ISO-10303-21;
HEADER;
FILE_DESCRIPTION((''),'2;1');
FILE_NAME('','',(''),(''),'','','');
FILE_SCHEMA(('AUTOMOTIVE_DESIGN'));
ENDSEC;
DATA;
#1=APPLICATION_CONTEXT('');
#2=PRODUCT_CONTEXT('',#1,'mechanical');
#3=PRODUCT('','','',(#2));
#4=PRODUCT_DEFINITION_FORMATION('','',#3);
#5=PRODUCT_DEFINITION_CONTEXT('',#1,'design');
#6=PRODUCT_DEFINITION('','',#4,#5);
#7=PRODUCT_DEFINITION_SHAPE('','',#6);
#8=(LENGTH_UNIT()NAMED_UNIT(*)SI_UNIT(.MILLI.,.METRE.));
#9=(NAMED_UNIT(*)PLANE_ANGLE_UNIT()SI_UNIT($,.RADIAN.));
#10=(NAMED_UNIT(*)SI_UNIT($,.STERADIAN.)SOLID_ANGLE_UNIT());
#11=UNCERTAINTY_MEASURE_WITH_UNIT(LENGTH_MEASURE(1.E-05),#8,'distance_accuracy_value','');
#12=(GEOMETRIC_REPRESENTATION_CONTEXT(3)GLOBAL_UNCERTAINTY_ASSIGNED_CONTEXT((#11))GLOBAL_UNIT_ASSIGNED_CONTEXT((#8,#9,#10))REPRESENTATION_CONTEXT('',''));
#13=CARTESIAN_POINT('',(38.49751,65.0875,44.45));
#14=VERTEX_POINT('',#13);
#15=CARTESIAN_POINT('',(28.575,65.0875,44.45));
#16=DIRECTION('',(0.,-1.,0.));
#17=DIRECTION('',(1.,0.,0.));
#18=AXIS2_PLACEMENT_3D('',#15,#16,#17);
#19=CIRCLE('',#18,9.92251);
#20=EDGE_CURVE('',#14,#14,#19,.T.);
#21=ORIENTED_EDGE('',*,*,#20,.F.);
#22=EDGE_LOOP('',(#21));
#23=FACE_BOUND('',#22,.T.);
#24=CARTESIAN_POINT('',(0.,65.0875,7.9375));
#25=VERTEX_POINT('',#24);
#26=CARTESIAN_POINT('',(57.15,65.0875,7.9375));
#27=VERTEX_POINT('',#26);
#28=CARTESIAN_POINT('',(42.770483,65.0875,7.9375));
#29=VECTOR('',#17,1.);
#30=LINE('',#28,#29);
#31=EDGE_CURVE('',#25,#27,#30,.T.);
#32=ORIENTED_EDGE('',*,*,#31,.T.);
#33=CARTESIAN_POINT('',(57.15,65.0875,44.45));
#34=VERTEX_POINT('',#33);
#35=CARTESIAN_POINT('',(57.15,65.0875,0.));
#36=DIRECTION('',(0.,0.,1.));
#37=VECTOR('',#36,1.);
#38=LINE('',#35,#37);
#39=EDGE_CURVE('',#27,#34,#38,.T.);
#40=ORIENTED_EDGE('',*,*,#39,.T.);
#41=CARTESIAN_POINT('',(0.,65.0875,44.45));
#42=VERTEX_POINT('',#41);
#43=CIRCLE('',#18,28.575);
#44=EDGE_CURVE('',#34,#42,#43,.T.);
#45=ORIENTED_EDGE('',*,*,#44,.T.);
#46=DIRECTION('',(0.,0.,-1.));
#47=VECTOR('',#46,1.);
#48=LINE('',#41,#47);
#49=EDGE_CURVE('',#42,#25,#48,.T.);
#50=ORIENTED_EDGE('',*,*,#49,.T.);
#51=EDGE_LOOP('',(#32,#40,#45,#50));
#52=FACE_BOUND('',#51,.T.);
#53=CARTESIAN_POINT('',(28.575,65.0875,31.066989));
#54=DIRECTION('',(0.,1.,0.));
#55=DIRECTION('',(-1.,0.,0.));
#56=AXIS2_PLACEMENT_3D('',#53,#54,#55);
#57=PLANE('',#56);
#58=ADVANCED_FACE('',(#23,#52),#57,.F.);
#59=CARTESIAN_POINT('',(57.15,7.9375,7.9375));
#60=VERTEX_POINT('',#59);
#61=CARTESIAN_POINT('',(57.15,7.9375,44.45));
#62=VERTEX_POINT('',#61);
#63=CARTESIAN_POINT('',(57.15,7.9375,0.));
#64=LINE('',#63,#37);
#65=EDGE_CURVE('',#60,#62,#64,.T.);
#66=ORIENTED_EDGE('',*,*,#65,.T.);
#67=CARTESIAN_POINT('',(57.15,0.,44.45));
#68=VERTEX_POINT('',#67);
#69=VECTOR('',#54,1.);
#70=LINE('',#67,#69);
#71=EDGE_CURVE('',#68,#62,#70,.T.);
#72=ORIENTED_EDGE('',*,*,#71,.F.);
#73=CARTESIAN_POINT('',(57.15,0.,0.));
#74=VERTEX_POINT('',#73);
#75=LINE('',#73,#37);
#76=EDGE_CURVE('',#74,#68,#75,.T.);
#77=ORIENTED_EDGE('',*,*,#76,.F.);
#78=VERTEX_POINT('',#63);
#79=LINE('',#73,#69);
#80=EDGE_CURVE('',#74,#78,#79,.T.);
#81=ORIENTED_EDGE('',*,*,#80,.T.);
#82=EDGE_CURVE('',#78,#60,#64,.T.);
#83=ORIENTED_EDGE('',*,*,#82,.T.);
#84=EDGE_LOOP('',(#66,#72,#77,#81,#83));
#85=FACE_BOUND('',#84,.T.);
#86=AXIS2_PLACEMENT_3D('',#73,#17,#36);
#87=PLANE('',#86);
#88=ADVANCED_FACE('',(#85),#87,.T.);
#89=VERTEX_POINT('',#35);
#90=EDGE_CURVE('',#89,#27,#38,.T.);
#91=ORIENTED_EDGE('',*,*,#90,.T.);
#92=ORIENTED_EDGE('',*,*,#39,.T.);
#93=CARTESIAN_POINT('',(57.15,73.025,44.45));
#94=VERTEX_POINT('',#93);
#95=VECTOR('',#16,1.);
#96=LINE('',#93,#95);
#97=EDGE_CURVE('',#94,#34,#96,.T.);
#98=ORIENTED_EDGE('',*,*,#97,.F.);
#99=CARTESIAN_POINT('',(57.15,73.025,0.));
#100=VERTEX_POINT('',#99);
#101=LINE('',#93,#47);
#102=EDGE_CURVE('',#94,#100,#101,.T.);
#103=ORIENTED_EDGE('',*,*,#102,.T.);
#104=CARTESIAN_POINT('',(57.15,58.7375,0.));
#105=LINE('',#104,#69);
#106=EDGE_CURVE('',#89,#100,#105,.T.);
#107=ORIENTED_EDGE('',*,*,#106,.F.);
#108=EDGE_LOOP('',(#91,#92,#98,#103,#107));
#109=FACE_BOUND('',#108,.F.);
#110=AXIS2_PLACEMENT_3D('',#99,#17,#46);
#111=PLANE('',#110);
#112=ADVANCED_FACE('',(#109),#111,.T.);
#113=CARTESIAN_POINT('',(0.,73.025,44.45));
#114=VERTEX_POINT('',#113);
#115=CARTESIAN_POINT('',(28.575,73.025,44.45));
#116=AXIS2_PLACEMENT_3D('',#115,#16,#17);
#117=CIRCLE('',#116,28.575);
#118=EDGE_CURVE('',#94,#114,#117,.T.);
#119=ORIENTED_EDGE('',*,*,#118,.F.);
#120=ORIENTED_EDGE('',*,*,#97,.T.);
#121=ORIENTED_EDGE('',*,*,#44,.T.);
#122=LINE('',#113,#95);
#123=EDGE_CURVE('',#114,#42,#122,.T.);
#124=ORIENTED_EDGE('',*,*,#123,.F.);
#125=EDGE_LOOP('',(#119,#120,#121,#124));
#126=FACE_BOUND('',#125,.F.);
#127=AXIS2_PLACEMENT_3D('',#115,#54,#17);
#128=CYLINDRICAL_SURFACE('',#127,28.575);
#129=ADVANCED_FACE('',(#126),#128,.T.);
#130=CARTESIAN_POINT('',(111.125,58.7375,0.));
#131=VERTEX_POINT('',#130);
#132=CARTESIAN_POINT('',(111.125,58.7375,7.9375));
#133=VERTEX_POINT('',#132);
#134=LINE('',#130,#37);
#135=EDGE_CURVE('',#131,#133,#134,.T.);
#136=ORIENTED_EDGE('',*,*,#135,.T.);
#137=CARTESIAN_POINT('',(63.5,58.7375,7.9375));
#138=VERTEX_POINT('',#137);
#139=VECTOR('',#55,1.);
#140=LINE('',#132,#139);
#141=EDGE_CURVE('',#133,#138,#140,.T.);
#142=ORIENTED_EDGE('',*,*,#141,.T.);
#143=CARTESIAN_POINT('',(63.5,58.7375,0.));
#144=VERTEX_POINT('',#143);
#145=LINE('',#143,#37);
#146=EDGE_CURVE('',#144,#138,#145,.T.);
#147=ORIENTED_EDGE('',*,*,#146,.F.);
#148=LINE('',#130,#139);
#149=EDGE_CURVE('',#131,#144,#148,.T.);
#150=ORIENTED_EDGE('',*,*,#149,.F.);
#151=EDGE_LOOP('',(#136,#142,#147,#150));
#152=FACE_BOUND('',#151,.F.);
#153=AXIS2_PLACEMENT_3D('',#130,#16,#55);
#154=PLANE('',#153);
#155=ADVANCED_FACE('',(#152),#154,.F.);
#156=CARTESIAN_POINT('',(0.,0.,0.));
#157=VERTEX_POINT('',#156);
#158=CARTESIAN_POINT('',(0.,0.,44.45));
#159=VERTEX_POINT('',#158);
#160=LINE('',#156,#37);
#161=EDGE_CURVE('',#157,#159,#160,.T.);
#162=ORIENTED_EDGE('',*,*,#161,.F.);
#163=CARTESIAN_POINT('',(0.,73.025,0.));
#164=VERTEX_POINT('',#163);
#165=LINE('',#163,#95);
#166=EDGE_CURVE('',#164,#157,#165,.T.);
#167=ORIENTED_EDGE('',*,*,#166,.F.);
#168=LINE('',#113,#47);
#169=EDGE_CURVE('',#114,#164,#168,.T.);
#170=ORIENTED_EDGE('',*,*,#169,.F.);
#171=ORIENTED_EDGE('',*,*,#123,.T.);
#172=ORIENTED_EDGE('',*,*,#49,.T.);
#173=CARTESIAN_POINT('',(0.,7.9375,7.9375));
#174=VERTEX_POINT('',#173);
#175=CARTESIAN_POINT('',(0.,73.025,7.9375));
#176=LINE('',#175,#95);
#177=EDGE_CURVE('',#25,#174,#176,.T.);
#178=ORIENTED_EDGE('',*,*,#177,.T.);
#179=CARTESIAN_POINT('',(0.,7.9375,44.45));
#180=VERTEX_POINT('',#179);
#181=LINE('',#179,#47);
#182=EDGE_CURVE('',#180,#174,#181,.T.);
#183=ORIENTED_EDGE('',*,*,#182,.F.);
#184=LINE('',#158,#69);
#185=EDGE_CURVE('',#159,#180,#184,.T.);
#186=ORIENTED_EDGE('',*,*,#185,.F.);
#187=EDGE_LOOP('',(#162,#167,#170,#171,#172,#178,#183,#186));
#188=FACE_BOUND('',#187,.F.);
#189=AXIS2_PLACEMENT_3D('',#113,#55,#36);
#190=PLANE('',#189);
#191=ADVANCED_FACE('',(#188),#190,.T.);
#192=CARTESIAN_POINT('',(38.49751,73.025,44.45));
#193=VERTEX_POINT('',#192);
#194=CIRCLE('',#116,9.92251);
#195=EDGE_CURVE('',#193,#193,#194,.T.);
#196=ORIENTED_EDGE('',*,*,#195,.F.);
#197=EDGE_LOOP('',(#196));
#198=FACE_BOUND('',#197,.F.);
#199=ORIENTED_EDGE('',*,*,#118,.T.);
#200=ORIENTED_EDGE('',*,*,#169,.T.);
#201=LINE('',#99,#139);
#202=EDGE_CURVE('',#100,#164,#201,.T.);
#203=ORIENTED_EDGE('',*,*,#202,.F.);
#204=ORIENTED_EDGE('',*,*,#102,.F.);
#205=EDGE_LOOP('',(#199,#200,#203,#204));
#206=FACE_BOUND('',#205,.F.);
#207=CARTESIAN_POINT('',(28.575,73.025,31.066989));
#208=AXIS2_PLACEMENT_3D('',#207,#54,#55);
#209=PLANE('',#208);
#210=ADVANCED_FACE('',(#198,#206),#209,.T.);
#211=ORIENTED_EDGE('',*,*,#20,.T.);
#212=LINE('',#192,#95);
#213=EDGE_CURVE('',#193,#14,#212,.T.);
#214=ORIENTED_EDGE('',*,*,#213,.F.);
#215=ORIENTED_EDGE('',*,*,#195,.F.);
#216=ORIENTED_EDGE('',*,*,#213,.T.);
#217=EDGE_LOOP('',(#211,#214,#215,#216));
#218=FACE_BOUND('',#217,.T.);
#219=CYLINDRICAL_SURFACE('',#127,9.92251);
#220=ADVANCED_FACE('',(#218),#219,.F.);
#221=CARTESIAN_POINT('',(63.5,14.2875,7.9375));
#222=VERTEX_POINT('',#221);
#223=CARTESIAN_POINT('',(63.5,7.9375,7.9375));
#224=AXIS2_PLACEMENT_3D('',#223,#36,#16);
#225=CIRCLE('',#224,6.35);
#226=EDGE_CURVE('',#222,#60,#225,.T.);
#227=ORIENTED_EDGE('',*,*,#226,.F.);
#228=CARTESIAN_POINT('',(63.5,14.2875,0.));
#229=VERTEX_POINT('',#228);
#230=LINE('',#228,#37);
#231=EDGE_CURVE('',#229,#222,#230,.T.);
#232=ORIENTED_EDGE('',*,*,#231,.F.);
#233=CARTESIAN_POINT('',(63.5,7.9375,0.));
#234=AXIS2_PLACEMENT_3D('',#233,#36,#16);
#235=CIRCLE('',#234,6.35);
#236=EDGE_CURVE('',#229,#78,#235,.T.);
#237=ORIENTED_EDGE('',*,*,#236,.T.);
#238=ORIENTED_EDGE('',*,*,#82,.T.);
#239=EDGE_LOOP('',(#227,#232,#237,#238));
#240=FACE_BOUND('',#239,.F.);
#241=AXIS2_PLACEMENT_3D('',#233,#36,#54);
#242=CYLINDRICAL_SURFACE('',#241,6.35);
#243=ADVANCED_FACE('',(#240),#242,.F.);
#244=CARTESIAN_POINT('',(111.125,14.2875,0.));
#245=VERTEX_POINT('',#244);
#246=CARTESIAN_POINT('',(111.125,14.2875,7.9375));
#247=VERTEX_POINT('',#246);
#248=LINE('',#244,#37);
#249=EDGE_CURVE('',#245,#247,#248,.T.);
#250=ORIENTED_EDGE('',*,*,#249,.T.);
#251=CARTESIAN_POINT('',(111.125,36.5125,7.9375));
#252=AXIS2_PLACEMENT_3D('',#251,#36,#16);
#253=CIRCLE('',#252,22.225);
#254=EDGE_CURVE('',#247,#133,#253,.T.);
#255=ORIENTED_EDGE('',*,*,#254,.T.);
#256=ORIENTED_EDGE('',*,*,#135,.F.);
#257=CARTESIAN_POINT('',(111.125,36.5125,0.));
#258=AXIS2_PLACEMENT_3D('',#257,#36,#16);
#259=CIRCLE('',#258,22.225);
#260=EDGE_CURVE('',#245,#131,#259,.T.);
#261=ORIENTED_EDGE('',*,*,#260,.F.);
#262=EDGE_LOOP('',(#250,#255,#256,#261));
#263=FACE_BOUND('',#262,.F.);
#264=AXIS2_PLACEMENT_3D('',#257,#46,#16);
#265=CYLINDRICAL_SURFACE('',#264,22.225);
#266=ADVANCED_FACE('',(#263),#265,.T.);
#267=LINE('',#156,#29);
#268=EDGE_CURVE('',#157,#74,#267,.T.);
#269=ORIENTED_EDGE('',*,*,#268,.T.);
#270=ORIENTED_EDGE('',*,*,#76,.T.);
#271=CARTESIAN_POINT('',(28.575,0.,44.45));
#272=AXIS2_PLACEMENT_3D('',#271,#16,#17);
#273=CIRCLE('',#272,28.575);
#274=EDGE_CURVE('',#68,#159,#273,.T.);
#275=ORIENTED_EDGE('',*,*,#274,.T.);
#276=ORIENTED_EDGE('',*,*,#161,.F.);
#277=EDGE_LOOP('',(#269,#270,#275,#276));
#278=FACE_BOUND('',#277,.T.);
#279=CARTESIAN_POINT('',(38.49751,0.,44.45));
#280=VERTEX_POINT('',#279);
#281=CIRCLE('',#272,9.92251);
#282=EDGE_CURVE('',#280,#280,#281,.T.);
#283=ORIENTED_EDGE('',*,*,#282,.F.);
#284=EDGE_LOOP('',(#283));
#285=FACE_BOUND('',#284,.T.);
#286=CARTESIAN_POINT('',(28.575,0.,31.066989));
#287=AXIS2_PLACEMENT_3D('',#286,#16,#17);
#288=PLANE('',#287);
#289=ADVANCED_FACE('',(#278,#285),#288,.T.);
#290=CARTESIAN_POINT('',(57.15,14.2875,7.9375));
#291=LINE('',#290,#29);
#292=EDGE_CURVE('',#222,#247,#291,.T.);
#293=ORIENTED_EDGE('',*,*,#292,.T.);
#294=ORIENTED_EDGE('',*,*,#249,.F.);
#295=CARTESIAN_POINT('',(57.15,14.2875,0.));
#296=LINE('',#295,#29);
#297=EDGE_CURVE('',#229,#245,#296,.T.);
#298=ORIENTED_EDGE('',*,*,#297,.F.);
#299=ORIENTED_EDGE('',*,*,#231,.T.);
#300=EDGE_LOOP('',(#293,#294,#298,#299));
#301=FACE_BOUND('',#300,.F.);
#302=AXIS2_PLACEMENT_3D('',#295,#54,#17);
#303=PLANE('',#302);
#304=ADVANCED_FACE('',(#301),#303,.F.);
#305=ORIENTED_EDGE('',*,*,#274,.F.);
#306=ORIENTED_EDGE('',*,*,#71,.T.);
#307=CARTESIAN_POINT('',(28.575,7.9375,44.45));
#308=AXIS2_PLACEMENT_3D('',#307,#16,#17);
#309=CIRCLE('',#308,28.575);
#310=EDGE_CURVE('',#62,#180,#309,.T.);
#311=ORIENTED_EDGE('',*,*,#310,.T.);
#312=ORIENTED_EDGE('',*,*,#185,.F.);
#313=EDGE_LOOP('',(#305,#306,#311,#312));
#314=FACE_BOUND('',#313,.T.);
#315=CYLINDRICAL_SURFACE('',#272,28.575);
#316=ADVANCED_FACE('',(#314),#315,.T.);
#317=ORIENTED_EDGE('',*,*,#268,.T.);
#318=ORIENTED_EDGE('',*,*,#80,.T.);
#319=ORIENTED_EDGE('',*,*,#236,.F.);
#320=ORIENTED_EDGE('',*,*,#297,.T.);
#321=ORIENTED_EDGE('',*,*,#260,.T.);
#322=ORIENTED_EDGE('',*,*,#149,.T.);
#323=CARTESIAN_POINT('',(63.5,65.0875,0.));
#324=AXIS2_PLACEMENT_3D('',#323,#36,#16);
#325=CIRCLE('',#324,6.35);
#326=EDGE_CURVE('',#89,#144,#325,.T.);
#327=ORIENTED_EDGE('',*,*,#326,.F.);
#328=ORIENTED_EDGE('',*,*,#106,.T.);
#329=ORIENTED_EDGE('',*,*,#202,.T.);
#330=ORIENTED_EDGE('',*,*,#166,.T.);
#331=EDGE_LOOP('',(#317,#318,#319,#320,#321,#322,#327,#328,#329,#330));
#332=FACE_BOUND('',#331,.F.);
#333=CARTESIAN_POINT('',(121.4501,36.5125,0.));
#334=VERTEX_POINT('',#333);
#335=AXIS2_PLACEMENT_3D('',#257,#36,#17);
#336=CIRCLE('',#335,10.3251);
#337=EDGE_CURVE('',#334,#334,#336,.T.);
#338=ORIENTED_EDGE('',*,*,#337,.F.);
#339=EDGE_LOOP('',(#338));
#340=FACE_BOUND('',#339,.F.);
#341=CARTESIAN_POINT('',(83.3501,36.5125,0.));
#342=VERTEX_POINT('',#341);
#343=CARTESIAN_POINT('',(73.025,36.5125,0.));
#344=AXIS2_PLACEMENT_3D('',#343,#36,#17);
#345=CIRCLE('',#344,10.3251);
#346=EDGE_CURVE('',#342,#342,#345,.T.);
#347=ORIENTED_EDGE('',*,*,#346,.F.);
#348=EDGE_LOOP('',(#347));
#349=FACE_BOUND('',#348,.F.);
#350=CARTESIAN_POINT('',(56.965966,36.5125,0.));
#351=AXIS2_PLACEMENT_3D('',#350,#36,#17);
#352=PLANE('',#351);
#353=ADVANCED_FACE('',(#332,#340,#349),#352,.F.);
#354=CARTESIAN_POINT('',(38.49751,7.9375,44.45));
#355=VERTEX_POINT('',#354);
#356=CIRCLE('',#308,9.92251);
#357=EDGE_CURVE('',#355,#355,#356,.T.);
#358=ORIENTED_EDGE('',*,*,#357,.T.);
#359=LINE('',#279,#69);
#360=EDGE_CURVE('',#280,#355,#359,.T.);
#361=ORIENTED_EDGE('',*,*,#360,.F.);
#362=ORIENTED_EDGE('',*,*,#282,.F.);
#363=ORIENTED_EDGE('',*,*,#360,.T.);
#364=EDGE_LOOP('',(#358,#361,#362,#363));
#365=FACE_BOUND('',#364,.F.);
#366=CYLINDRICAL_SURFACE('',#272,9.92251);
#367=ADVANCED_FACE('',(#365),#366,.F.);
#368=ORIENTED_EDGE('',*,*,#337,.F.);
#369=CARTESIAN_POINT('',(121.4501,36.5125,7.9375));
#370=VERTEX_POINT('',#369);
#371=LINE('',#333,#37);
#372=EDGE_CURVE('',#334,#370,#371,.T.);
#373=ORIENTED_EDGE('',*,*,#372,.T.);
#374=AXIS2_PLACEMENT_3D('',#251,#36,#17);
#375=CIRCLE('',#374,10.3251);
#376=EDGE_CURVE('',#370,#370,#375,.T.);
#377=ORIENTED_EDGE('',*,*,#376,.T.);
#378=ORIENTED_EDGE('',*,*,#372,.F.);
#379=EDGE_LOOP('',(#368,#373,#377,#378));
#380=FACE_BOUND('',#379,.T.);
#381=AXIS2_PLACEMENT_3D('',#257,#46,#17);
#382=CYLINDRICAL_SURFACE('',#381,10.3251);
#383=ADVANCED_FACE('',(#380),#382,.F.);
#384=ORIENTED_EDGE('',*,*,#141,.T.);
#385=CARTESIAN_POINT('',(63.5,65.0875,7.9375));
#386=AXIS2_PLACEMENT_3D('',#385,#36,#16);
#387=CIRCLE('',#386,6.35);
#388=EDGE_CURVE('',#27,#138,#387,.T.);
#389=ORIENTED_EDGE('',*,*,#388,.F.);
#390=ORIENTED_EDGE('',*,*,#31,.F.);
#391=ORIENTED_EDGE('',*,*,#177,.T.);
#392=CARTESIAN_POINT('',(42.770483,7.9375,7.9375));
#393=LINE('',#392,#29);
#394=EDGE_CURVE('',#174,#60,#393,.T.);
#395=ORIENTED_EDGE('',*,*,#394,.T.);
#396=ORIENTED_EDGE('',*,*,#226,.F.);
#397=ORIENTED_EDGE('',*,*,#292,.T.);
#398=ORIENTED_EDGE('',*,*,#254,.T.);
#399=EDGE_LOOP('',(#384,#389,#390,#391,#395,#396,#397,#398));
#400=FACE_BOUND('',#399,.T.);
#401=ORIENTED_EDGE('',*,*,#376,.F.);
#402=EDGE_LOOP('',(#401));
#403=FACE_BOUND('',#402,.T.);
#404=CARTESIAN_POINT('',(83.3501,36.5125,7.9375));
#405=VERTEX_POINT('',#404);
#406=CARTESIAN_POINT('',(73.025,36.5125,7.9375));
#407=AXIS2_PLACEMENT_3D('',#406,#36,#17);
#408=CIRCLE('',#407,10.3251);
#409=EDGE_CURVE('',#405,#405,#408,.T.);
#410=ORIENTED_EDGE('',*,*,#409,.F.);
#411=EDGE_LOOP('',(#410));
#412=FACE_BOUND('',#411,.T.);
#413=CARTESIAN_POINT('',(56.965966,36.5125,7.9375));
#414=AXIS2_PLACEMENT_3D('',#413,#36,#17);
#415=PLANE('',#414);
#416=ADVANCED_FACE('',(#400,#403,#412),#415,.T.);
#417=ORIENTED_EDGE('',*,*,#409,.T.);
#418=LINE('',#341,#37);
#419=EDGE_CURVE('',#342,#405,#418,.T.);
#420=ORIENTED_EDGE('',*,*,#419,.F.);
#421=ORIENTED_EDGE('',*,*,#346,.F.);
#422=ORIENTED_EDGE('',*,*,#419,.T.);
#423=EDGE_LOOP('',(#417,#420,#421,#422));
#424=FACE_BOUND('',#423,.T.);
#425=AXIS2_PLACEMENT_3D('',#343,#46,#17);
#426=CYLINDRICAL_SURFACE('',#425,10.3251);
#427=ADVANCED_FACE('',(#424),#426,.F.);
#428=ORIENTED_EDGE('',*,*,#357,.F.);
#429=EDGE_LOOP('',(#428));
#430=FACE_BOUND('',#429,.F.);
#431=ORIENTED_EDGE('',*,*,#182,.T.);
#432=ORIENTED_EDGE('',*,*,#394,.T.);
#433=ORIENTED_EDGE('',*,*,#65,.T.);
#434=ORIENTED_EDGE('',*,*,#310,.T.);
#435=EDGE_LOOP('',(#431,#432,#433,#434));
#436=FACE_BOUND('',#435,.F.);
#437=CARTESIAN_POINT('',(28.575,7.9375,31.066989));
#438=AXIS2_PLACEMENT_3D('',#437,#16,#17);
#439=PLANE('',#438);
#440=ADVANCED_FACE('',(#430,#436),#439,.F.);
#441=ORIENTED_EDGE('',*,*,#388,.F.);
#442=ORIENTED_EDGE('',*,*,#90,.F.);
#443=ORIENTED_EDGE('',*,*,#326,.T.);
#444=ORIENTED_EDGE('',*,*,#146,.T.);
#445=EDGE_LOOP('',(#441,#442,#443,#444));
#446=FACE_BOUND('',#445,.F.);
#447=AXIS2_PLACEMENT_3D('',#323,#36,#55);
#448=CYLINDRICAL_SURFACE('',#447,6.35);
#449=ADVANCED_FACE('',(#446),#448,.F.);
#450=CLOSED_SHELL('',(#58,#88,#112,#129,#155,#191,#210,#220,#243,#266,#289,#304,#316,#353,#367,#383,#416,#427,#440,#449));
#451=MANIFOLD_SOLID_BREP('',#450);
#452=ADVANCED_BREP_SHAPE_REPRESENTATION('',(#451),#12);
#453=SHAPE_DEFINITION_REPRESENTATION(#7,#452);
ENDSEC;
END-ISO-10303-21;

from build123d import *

# Parameters (mm, degrees)
F0_R     = 10.3251
F1_DEPTH = 7.9375
F2_R     = 9.92251
F3_DEPTH = 7.9375
F4_R     = 6.35


# Not quite as in the source:
# - a pattern or mirror of a feature is missing from the dataset's text; its kind, count and spacing are read off the source's solid


with BuildPart() as f1:
    # F0 (on Top) → F1 (new body)
    with BuildSketch(Plane.XY):
        with BuildLine():
            Line((0, 73.025), (0, 0))
            Line((0, 0), (57.15, 0))
            Line((57.15, 0), (57.15, 14.2875))
            Line((57.15, 14.2875), (111.125, 14.2875))
            ThreePointArc((111.125, 14.2875), (133.35, 36.5125), (111.125, 58.7375))
            Line((111.125, 58.7375), (57.15, 58.7375))
            Line((57.15, 58.7375), (57.15, 73.025))
            Line((57.15, 73.025), (0, 73.025))
        make_face()
        with Locations((73.025, 36.5125)):
            Circle(F0_R, mode=Mode.SUBTRACT)
        with Locations((111.125, 36.5125)):
            Circle(F0_R, mode=Mode.SUBTRACT)
    extrude(amount=F1_DEPTH)

    # F2 (on Front) → F3 (join)
    with BuildSketch(Plane.XZ):
        with BuildLine():
            Line((0, 44.45), (0, 0))
            Line((0, 0), (57.15, 0))
            Line((57.15, 0), (57.15, 44.45))
            ThreePointArc((57.15, 44.45), (28.575, 73.025), (0, 44.45))
        make_face()
        with Locations((28.575, 44.45)):
            Circle(F2_R, mode=Mode.SUBTRACT)
    f3 = extrude(amount=-F3_DEPTH)

    # F3_copies: F3 across plane
    add(f3.mirror(Plane.ZX.offset(36.5125)))

    # F4
    f4_edges = [f1.edges().sort_by_distance(p)[0] for p in [
        (57.15, 14.2875, 3.96875),
        (57.15, 58.7375, 3.96875),
    ]]
    fillet(f4_edges, radius=F4_R)


solid = f1.part
